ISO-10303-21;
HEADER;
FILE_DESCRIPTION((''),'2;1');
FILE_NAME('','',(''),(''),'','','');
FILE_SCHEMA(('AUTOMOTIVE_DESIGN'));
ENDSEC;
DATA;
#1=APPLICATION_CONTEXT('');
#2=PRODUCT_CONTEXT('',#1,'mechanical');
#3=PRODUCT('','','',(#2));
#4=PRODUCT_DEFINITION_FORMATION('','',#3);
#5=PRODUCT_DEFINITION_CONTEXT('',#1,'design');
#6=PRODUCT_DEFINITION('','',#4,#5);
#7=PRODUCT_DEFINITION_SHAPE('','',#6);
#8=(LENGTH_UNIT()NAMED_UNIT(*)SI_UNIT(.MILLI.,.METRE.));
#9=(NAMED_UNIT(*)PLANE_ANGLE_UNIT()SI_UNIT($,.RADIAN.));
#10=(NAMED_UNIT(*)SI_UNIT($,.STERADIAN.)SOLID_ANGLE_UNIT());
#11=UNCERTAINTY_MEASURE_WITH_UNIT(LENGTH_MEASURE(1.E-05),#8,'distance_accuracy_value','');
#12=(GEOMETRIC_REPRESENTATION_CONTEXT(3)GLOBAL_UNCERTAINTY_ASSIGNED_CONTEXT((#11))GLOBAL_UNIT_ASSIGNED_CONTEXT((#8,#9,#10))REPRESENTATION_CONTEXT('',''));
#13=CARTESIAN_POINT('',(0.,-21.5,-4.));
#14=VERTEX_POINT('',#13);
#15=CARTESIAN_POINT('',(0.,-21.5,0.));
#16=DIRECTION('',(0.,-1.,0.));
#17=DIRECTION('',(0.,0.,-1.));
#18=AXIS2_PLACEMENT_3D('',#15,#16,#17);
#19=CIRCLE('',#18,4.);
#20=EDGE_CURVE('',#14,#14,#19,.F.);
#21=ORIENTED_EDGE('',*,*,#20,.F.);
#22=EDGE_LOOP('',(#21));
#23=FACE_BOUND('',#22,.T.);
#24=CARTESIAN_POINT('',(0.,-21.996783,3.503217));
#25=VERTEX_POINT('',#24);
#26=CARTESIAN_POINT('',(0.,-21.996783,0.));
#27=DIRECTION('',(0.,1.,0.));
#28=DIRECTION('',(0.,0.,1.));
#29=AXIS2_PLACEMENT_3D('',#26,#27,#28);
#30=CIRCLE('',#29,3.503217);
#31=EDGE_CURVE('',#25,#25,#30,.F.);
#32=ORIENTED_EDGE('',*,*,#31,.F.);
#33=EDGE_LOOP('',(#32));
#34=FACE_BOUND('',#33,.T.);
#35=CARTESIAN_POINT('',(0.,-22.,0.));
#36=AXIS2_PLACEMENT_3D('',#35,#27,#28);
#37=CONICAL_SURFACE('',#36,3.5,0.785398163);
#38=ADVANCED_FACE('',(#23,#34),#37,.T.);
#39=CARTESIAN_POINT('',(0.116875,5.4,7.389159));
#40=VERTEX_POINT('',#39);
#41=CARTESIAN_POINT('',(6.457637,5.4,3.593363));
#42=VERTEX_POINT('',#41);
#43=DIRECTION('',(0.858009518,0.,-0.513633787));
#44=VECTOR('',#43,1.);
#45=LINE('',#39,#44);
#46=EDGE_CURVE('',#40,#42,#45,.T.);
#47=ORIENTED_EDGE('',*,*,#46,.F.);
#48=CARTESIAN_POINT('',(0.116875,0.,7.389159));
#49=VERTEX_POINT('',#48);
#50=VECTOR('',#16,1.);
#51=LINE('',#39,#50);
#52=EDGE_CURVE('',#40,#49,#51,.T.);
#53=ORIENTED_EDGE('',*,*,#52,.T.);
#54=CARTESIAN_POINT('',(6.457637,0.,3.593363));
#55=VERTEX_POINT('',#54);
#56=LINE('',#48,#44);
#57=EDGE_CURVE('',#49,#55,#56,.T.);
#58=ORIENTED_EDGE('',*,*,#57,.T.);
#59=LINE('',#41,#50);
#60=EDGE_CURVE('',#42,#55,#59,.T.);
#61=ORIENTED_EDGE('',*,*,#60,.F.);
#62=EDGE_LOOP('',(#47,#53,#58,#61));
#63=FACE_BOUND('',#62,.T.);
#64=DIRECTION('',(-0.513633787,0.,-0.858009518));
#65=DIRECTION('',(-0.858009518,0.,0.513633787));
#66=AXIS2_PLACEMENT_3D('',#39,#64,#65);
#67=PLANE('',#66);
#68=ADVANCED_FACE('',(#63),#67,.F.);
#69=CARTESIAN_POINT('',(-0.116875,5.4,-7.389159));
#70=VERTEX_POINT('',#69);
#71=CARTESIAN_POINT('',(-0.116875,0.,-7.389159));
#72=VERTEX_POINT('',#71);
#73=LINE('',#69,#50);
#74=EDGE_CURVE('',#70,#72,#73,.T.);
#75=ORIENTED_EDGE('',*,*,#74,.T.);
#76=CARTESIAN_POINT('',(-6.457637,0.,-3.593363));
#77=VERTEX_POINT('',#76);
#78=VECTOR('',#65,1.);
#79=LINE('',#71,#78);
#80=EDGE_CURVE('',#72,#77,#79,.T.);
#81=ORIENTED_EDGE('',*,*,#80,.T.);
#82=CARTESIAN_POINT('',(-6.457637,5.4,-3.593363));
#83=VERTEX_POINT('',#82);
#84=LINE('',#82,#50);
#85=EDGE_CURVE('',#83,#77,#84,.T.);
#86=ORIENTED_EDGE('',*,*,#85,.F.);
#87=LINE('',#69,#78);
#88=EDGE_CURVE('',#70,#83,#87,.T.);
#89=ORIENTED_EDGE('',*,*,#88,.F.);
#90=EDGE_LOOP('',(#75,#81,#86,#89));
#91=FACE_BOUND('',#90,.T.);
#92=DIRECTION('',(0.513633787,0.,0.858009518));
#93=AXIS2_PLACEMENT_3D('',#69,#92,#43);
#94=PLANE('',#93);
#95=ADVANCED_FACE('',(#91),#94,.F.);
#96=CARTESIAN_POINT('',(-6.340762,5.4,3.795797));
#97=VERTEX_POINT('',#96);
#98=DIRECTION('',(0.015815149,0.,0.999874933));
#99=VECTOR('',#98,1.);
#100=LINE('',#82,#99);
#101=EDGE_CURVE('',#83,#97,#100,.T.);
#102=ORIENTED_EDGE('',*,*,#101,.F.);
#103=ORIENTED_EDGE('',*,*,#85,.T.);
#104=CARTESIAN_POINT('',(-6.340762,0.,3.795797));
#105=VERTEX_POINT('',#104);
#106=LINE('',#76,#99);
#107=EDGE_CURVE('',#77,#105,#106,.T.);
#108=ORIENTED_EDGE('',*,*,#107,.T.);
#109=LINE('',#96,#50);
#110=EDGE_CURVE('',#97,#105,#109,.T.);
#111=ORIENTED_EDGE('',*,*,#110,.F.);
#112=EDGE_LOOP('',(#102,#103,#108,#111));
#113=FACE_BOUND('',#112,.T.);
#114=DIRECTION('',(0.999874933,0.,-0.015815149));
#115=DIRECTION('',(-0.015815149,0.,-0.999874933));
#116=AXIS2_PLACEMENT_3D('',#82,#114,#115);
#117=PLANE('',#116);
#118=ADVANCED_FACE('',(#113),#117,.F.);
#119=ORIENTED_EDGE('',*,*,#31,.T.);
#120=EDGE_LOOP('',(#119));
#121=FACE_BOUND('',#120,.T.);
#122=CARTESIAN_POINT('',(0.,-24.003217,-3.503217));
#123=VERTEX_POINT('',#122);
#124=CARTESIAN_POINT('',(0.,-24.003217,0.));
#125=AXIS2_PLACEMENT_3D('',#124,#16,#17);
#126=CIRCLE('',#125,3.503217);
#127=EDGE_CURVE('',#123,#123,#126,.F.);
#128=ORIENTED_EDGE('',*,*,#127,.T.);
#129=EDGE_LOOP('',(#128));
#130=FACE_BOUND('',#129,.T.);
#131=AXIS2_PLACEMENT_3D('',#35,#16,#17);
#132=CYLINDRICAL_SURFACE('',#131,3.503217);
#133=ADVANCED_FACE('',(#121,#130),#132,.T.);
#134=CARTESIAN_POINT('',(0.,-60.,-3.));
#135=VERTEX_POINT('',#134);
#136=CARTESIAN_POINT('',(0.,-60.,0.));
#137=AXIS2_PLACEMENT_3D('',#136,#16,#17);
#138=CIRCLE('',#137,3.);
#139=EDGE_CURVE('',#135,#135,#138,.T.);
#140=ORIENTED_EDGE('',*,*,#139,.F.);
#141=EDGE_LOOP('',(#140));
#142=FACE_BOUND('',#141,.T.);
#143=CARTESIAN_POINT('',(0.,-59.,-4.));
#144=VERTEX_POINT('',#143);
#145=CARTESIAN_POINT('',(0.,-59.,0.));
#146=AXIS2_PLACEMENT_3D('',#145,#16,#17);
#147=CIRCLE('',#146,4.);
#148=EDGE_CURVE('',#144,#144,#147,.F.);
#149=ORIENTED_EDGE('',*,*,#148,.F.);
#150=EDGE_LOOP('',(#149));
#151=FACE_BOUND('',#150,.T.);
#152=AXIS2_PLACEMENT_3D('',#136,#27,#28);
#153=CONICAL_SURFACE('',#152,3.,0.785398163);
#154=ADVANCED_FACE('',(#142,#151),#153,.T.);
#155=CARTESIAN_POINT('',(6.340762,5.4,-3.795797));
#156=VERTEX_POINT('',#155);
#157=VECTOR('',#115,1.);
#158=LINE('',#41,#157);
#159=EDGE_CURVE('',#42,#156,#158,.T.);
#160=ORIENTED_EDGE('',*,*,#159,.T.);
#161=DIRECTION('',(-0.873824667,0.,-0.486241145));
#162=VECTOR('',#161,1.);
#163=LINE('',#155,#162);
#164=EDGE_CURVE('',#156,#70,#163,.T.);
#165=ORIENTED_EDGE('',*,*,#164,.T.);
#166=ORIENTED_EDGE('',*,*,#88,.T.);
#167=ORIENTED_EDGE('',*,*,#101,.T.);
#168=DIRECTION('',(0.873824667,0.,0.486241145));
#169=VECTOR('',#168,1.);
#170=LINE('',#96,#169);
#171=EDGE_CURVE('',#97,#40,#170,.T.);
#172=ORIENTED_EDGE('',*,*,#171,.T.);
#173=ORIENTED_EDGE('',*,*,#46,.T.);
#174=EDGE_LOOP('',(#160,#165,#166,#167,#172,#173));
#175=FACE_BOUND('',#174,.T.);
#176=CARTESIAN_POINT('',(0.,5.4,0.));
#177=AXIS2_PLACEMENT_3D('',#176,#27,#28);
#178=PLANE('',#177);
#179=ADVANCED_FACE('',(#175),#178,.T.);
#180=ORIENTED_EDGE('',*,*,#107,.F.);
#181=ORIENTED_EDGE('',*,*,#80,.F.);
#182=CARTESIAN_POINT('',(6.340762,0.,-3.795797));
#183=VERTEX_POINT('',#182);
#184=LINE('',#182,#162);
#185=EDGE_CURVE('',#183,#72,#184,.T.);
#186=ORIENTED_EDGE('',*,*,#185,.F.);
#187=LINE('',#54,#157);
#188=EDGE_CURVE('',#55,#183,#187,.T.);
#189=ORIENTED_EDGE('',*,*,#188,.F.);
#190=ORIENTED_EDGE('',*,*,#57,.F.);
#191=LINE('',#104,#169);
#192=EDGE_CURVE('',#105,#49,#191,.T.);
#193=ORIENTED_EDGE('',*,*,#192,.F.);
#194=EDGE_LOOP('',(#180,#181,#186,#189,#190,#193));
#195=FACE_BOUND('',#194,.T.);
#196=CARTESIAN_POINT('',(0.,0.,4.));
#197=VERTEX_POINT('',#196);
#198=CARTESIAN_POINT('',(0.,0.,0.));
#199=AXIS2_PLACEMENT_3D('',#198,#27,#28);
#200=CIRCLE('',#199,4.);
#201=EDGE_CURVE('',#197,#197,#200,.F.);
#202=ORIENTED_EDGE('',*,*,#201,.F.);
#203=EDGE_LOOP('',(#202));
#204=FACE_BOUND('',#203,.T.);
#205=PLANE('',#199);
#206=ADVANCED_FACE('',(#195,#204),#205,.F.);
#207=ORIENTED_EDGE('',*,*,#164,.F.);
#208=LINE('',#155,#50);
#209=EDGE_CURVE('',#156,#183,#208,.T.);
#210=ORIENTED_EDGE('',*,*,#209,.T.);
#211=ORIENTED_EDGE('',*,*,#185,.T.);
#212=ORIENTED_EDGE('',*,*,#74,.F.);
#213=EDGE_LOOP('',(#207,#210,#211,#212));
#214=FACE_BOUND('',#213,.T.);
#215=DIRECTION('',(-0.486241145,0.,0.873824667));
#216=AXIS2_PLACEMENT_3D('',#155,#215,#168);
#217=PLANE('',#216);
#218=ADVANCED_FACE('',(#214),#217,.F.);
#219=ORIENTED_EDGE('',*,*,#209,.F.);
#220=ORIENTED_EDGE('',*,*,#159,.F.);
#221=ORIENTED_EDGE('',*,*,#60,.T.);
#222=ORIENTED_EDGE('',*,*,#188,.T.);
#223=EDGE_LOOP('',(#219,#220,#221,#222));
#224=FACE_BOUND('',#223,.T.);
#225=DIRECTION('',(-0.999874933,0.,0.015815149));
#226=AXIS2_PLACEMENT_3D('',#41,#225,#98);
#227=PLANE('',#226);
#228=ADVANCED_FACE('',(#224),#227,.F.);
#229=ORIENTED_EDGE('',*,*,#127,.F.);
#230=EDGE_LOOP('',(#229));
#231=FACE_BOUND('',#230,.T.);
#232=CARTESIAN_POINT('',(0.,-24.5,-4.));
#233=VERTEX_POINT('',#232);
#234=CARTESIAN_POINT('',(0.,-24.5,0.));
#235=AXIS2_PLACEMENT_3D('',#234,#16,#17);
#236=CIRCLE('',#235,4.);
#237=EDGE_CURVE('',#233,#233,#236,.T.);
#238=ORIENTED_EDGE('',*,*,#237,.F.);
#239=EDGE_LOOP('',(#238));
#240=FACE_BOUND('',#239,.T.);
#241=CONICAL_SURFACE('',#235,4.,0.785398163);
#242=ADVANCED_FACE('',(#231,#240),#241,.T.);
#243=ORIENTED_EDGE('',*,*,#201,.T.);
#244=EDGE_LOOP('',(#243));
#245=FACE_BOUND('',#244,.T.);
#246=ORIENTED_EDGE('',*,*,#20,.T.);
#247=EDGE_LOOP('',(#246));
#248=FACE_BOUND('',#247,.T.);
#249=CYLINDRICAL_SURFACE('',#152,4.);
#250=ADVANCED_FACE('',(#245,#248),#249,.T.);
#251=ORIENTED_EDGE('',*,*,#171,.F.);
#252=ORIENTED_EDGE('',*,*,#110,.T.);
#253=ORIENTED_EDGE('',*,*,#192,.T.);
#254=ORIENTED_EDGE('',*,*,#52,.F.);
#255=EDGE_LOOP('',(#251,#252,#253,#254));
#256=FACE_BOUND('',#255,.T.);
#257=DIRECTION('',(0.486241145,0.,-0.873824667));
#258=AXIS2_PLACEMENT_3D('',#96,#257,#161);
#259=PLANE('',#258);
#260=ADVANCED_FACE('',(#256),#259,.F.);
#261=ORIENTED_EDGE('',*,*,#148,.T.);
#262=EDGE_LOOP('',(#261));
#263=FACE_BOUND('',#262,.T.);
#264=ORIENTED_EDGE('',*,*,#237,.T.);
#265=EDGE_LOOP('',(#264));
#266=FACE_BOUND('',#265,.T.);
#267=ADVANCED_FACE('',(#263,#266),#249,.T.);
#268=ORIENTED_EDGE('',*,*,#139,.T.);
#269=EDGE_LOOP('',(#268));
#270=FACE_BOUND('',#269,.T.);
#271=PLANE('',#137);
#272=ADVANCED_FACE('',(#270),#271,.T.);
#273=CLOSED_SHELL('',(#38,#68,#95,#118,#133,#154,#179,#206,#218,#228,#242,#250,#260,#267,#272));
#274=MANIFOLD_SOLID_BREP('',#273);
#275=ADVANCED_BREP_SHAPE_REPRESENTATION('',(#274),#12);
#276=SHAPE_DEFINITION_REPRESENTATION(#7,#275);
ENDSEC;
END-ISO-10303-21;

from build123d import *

# Parameters (mm, degrees)
BOSS_EXTRUDE1_DEPTH = 5.4
SKETCH3_R           = 4
BOSS_EXTRUDE2_DEPTH = 60
SKETCH4_R           = 4.399457614
SKETCH4_R_2         = 3.503217006
CUT_EXTRUDE1_DEPTH  = 1
CHAMFER1_SIZE       = 0.5
CHAMFER2_SIZE       = 1


with BuildPart() as part:
    # Sketch1 → Boss-Extrude1 (new body)
    with BuildSketch(Plane(origin=(0, 0, 0), x_dir=(1, 0, 0), z_dir=(0, 1, 0))):
        Polygon((6.457637206, -3.593362639), (6.340761933, 3.795796549), (-0.116875273, 7.389159188), (-6.457637206, 3.593362639), (-6.340761933, -3.795796549), (0.116875273, -7.389159188), align=None)
    extrude(amount=BOSS_EXTRUDE1_DEPTH)

    # Sketch3 → Boss-Extrude2 (add)
    with BuildSketch(Plane.XZ):
        with Locations(Location((0, 0, 0), (0, 0, 90))):
            Circle(SKETCH3_R)
    extrude(amount=BOSS_EXTRUDE2_DEPTH)

    # Sketch4 → Cut-Extrude1 (cut, symmetric)
    with BuildSketch(Plane(origin=(0, -23, 0), x_dir=(-1, 0, 0), z_dir=(0, -1, 0))):
        Circle(SKETCH4_R)
        with Locations(Location((0, 0, 0), (0, 0, 90))):
            Circle(SKETCH4_R_2, mode=Mode.SUBTRACT)
    extrude(amount=CUT_EXTRUDE1_DEPTH, both=True, mode=Mode.SUBTRACT)

    # Chamfer1
    # the kernel refuses this chamfer: 0.5 mm, written as the material it takes off along each edge
    with BuildSketch(Plane(origin=(0, -22, 0), x_dir=(0, 0, 1), z_dir=(-1, 0, 0))) as chamfer1_piece_1_section:
        Polygon((4, CHAMFER1_SIZE), (4 - CHAMFER1_SIZE, 0), (4, 0), align=None)
    chamfer1_piece_1 = revolve(axis=Axis((0, -22, 0), (0, 1, 0)), mode=Mode.PRIVATE)
    chamfer1_piece_1 = chamfer1_piece_1 - Plane(origin=(0, -21.751856144, 0), x_dir=(0, 0, -1), z_dir=(0, 1, 0)) * Cylinder(3.503217006, 16, mode=Mode.PRIVATE)
    add(chamfer1_piece_1, mode=Mode.SUBTRACT)
    with BuildSketch(Plane(origin=(0, -24, 0), x_dir=(0, 0, 1), z_dir=(-1, 0, 0))) as chamfer1_piece_2_section:
        Polygon((4 - CHAMFER1_SIZE, 0), (4, -CHAMFER1_SIZE), (4, 0), align=None)
    chamfer1_piece_2 = revolve(axis=Axis((0, -24, 0), (0, 1, 0)), mode=Mode.PRIVATE)
    chamfer1_piece_2 = chamfer1_piece_2 - Plane(origin=(0, -24.248143856, 0), x_dir=(0, 0, -1), z_dir=(0, 1, 0)) * Cylinder(3.503217006, 16, mode=Mode.PRIVATE)
    add(chamfer1_piece_2, mode=Mode.SUBTRACT)

    # Chamfer2
    chamfer2_edges = [part.edges().sort_by_distance(p)[0] for p in [
        (0, -60, -4),
    ]]
    chamfer(chamfer2_edges, length=CHAMFER2_SIZE)


solid = part.part
